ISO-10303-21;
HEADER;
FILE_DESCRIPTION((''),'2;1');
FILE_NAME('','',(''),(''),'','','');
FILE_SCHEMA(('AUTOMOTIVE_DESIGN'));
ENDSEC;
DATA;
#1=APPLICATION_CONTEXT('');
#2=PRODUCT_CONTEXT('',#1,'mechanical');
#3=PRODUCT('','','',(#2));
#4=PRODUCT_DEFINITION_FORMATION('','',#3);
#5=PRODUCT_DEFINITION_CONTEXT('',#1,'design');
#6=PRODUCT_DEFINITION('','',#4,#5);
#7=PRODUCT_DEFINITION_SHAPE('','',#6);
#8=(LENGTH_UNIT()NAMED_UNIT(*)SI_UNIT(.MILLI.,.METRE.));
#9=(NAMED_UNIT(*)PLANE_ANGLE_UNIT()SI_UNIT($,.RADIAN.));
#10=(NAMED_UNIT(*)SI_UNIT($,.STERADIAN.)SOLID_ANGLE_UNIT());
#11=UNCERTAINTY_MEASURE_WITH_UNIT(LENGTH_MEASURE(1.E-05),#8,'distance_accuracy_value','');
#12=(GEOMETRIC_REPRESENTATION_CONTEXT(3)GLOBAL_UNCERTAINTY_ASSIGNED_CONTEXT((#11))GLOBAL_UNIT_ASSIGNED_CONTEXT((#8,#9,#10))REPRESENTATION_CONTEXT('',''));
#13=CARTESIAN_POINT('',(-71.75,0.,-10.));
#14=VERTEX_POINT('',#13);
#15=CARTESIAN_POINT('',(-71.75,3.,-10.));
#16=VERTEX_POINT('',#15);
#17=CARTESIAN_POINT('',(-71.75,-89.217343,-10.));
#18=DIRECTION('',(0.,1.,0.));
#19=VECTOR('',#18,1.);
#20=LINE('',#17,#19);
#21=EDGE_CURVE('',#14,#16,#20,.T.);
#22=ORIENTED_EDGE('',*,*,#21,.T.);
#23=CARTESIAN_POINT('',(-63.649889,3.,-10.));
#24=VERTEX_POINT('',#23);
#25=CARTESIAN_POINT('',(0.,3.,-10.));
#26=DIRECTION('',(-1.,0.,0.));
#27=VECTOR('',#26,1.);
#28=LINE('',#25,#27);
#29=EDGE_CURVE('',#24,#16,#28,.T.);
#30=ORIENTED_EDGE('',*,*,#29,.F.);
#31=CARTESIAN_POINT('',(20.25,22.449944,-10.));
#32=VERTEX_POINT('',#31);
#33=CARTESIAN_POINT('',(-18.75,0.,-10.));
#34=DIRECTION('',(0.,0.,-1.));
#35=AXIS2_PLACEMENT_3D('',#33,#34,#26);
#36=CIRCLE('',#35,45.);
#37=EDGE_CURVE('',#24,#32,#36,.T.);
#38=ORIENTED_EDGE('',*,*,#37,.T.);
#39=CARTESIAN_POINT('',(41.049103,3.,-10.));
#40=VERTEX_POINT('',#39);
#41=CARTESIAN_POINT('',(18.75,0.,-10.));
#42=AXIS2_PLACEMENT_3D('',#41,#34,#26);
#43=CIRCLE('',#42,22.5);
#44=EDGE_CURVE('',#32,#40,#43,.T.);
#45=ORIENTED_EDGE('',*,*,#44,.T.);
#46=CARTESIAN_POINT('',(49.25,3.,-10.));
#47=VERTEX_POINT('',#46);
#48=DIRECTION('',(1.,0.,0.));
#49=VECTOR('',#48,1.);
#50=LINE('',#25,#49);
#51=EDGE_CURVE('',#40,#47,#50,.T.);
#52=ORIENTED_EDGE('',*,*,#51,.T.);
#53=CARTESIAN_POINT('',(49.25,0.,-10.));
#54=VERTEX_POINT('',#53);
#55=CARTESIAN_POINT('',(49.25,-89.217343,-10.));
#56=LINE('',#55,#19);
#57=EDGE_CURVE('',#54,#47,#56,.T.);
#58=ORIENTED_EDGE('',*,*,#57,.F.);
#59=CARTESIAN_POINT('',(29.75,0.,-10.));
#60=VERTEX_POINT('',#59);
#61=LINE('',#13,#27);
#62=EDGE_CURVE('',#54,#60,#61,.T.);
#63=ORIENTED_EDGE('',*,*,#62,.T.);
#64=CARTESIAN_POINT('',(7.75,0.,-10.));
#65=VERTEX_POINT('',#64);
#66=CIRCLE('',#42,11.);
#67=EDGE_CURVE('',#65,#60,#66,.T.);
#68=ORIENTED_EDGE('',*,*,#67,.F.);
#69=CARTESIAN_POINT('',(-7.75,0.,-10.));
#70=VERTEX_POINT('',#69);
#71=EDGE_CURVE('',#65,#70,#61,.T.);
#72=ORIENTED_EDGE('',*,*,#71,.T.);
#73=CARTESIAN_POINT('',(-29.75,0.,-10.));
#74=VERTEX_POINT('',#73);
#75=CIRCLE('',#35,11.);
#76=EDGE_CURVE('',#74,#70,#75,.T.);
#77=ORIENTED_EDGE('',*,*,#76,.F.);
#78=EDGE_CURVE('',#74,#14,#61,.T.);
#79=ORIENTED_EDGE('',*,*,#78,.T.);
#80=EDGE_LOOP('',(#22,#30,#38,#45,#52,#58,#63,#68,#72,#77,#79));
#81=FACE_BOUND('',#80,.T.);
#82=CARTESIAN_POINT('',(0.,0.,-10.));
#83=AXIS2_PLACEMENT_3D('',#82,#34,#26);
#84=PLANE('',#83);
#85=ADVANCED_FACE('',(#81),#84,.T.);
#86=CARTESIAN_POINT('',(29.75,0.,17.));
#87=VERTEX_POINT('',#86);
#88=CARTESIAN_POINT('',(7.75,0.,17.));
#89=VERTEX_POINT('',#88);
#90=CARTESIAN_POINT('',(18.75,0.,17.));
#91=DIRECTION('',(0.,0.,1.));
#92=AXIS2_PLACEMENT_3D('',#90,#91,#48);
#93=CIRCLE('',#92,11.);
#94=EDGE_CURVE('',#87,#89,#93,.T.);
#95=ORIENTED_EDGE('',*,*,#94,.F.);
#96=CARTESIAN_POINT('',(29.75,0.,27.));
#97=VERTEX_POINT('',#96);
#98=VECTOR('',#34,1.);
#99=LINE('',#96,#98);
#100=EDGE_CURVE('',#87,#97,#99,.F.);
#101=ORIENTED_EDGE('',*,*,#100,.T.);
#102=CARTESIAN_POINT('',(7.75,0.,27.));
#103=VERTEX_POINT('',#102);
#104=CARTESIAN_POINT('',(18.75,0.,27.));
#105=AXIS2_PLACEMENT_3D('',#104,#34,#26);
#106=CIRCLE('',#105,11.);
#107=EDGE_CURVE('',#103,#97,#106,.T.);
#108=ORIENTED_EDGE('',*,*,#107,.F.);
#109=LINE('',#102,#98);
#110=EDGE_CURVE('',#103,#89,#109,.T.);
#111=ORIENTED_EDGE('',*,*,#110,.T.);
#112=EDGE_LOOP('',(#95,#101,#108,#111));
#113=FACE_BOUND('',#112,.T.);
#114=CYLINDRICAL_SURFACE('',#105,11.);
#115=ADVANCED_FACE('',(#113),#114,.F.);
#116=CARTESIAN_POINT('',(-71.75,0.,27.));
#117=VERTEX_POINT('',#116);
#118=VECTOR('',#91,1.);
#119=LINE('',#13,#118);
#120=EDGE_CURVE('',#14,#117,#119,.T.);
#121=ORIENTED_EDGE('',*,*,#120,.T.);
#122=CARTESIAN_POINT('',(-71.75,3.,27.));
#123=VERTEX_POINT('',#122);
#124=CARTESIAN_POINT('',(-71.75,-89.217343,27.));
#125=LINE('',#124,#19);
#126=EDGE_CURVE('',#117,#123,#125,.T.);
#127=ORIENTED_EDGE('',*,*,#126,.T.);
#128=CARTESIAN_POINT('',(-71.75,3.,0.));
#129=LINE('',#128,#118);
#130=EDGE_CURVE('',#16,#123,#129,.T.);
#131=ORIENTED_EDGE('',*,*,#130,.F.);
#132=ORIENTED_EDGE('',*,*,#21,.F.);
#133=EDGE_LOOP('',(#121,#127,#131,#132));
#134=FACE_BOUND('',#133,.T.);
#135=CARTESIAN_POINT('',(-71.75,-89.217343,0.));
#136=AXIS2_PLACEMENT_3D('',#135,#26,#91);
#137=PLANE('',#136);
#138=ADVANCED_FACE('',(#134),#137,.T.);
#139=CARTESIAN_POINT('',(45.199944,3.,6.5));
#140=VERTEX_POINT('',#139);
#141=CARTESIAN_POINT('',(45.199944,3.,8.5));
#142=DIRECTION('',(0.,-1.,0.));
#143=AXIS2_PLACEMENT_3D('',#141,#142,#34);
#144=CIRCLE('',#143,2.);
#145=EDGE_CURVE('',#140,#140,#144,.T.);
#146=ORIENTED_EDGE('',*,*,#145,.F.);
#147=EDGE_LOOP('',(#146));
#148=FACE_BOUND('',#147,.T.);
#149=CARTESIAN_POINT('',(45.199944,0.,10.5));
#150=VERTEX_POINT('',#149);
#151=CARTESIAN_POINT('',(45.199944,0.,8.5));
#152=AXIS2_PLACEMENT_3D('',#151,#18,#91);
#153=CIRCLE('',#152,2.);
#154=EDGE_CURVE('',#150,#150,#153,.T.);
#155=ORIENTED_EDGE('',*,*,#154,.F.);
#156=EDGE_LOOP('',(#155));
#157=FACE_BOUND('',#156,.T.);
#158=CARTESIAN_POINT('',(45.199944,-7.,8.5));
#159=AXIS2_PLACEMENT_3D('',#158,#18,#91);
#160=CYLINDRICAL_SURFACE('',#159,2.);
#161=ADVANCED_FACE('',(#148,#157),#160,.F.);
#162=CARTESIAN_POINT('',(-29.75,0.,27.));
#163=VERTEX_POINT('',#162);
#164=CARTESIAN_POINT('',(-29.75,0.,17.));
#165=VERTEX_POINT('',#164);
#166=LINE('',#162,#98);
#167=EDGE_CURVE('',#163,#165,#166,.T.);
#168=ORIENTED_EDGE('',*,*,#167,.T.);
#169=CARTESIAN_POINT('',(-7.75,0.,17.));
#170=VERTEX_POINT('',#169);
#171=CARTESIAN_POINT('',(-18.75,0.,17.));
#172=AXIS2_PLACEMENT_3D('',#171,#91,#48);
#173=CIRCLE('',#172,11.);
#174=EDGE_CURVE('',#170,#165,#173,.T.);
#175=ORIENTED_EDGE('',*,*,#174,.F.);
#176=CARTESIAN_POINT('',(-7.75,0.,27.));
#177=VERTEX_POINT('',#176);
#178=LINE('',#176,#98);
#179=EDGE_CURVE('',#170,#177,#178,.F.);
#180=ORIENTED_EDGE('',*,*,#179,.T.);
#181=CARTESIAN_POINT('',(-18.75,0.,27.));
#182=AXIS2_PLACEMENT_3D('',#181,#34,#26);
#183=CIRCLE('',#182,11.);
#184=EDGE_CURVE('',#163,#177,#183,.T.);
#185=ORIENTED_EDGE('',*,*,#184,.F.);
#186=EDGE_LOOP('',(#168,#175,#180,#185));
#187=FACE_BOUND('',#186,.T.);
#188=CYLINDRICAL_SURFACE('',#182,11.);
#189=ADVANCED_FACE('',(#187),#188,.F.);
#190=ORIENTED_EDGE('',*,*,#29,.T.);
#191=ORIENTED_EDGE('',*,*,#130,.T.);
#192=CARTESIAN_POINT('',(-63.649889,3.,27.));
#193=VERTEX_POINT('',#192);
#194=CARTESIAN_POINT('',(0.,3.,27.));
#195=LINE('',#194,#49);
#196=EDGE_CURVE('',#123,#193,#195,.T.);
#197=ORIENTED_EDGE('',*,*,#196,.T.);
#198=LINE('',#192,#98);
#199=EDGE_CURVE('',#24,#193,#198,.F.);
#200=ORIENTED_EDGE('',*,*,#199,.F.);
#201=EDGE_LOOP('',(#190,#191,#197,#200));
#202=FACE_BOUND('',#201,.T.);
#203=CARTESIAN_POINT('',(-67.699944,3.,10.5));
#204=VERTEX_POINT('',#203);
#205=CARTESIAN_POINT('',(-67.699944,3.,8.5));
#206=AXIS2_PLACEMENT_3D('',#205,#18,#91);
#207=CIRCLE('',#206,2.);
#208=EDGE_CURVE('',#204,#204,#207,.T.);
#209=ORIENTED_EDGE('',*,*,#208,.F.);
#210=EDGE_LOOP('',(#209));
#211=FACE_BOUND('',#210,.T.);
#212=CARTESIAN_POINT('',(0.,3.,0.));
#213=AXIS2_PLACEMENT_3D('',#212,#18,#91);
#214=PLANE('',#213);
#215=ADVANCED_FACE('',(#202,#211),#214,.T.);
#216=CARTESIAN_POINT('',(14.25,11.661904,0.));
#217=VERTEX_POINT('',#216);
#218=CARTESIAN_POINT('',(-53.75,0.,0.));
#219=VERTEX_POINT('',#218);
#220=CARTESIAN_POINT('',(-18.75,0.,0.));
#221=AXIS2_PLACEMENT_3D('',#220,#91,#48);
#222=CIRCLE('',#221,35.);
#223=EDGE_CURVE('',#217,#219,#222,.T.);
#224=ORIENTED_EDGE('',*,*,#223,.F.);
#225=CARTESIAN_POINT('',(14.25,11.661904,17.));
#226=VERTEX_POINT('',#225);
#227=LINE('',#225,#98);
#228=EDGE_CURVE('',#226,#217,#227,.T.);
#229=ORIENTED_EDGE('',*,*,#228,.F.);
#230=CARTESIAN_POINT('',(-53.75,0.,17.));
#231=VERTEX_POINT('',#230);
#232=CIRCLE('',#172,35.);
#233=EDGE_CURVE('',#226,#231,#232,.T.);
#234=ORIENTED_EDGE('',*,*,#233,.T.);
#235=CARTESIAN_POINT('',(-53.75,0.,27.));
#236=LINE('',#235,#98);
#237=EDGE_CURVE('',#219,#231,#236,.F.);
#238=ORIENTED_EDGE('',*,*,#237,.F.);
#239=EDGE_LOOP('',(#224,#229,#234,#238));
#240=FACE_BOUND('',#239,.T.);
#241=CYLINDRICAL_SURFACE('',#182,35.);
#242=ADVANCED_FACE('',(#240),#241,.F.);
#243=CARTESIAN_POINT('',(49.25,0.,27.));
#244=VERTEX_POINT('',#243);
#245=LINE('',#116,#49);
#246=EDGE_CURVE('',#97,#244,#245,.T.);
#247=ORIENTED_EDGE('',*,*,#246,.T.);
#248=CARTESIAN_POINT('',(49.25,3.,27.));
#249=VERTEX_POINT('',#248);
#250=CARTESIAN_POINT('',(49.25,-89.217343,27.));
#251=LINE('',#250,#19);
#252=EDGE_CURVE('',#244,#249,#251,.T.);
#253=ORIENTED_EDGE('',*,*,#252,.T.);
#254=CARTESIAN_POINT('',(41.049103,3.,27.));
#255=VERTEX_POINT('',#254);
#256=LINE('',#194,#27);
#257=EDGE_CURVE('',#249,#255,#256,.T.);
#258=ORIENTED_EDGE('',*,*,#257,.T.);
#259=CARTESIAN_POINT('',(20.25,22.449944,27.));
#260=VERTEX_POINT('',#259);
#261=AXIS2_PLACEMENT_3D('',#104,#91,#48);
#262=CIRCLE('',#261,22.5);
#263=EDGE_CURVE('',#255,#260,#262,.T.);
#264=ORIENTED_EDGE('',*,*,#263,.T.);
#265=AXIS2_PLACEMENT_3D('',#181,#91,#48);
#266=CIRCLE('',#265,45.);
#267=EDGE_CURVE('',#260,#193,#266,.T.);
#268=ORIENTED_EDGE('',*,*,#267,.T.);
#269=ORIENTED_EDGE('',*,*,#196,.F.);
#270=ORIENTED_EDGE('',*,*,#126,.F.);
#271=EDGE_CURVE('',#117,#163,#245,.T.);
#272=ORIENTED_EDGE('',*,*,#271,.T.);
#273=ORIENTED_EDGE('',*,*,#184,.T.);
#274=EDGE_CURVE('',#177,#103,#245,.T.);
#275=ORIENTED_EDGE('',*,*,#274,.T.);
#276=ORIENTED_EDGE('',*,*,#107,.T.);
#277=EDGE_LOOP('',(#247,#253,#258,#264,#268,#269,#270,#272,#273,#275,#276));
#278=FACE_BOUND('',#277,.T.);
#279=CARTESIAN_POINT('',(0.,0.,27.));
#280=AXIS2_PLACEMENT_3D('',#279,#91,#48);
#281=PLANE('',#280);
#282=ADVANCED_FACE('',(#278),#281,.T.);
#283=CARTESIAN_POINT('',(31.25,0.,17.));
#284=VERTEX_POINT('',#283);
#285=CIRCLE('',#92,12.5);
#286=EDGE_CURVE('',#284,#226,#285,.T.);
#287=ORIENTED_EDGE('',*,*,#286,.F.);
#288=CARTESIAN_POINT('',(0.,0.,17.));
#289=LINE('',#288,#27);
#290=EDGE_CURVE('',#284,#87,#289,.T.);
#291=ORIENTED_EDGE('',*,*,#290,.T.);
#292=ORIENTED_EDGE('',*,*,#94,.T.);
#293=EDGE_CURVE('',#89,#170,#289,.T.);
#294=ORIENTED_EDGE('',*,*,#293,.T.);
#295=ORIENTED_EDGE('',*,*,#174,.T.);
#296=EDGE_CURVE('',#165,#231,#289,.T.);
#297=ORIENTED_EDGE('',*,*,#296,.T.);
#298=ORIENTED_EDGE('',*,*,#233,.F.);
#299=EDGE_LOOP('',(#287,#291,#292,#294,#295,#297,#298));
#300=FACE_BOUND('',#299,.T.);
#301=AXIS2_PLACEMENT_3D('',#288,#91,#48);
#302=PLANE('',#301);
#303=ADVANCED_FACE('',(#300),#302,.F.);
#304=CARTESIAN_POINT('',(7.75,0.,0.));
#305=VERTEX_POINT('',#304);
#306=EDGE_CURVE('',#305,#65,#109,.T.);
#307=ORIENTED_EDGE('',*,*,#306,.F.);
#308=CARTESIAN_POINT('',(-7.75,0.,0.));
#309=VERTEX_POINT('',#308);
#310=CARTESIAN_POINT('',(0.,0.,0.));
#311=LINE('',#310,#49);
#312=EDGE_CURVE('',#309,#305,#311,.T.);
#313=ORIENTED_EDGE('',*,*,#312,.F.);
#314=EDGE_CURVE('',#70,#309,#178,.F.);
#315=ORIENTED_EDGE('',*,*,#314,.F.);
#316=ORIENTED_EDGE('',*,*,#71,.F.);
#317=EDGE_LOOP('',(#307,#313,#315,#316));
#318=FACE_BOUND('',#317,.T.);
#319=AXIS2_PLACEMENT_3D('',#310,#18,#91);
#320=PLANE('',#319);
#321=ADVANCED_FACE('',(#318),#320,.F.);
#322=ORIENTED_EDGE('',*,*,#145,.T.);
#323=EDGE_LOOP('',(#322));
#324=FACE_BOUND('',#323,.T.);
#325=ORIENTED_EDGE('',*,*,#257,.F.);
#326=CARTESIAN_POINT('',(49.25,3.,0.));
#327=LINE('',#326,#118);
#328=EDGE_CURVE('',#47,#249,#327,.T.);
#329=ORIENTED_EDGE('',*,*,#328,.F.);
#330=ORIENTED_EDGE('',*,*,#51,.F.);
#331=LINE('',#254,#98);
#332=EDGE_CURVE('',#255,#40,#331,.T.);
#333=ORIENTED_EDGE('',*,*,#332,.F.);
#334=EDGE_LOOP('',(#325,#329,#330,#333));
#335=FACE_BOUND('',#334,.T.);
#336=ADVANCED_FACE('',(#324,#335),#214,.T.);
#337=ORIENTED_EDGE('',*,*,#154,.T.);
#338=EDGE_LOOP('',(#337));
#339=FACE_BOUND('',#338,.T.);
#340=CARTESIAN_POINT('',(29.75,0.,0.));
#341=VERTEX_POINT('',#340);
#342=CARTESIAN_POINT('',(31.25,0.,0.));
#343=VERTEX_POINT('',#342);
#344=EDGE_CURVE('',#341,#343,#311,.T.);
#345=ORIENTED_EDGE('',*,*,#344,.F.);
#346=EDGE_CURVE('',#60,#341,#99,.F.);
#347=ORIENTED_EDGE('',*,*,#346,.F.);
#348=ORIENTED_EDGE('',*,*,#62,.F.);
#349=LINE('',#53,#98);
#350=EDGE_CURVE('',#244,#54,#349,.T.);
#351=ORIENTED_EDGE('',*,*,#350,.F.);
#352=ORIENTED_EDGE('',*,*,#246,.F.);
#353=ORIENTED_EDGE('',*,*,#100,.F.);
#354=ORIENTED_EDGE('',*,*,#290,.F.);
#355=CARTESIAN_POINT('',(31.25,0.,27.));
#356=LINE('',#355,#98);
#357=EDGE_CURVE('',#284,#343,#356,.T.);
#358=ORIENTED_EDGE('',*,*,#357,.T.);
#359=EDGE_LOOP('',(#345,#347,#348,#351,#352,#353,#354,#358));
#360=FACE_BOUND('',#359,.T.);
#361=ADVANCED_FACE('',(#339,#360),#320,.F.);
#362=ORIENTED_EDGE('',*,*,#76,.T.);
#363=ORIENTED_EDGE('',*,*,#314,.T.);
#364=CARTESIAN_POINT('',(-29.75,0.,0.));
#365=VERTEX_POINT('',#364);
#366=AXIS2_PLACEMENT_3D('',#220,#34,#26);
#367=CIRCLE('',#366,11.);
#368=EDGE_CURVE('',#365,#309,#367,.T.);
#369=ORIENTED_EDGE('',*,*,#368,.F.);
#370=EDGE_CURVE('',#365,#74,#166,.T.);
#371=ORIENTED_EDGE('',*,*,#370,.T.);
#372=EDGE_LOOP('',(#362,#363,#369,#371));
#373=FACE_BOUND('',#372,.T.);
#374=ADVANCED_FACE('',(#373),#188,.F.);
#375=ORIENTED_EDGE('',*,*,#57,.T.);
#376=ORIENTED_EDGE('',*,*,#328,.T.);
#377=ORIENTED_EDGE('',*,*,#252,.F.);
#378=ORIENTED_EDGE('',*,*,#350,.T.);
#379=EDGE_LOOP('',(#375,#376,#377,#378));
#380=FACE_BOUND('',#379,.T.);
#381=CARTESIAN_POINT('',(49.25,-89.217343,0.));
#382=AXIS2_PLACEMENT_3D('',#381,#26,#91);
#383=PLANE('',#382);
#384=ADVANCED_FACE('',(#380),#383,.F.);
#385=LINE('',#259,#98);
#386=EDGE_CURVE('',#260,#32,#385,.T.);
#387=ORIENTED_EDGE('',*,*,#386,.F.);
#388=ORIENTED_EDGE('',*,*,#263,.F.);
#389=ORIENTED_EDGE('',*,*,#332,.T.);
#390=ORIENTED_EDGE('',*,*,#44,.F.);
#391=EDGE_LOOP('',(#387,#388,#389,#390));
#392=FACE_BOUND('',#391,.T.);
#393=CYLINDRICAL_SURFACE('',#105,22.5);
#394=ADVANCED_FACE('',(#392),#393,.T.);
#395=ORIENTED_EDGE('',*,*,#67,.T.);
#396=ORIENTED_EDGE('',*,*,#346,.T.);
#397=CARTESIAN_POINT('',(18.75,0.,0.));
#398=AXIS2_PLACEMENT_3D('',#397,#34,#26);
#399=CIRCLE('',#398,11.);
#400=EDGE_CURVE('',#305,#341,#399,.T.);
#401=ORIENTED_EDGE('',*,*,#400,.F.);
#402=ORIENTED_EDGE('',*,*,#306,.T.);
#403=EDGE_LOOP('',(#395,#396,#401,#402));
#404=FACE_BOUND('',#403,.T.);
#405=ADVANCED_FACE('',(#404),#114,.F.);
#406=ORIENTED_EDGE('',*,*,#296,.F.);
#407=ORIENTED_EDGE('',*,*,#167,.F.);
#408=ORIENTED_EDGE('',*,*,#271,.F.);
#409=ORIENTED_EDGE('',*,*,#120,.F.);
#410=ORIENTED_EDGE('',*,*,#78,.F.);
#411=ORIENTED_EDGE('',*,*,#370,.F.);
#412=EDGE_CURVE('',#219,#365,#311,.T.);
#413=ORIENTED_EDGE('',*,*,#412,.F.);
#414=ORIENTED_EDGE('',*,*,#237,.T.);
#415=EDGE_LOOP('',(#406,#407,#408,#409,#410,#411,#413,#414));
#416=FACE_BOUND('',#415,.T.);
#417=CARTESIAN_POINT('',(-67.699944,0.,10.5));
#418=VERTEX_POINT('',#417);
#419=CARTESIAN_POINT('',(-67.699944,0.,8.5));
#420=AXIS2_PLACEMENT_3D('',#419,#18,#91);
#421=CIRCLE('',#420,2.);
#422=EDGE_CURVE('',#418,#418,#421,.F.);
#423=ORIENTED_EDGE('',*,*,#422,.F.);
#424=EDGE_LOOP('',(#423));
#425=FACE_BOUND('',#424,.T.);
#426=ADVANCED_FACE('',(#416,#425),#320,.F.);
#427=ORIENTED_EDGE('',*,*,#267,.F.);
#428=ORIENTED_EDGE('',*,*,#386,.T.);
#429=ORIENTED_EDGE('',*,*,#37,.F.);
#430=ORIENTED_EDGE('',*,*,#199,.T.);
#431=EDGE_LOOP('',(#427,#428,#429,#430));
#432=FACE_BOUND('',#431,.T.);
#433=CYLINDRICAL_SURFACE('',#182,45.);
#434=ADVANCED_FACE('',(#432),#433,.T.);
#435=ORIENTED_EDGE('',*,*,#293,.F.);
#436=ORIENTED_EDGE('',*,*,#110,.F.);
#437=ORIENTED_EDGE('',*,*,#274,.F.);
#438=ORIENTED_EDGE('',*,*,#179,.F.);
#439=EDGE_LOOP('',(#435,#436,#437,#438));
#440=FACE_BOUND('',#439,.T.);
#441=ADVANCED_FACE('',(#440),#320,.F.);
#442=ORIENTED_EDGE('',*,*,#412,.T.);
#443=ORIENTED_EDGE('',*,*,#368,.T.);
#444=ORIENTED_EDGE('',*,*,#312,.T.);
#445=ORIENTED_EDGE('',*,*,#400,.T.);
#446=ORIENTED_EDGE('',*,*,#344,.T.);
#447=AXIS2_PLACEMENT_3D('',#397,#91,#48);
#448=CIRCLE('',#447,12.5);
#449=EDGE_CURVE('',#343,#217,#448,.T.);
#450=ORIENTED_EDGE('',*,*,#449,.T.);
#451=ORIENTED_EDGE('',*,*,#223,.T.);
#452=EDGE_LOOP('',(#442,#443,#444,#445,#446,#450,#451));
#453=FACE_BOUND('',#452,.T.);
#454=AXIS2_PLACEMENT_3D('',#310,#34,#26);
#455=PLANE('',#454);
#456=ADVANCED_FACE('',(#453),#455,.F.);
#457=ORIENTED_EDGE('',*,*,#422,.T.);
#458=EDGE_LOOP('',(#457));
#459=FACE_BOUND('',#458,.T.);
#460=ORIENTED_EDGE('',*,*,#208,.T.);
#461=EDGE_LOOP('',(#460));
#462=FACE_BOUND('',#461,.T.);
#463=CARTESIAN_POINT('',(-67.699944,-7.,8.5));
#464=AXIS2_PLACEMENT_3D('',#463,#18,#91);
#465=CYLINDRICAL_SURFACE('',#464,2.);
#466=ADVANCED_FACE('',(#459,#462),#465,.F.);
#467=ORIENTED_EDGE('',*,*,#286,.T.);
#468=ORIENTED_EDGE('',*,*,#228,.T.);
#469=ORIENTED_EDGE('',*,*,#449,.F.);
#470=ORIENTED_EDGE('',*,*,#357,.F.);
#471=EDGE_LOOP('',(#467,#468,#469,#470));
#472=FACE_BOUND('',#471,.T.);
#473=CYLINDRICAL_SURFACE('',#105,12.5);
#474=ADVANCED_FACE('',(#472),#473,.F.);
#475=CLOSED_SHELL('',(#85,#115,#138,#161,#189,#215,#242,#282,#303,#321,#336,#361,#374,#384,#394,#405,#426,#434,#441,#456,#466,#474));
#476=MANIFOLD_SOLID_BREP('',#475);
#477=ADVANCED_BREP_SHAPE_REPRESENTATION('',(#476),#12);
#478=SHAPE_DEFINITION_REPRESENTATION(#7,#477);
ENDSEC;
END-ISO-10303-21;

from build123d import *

# Parameters (mm, degrees)
BOSS_EXTRUDE2_DEPTH      = 27
SHELL5_DEPTH             = 17
BOSS_EXTRUDE3_START      = 10
BOSS_EXTRUDE3_DEPTH      = 10
SKETCH5_R                = 11
CUT_EXTRUDE2_DEPTH       = 87.360074687
BOSS_EXTRUDE4_DEPTH      = 37
BOSS_EXTRUDE5_DEPTH      = 3
BOSS_EXTRUDE5_DEPTH_BACK = 50
SKETCH10_R               = 2
CUT_EXTRUDE3_DEPTH       = 10
SKETCH11_W               = 121
SKETCH11_H               = 37
CUT_EXTRUDE4_DEPTH       = 92.526294036


# Read off the part's stored shape, not the designer's step: Shell5
with BuildPart() as part:
    # Sketch1 → Boss-Extrude2 (new body)
    with BuildSketch(Plane.XY):
        with BuildLine():
            ThreePointArc((20.25, 22.449944321), (-63.75, 0), (20.25, -22.449944321))
            ThreePointArc((20.25, -22.449944321), (41.25, 0), (20.25, 22.449944321))
        make_face()
    extrude(amount=BOSS_EXTRUDE2_DEPTH)

    # Shell5 outline → Shell5 (cut)
    with BuildSketch(Plane.XY):
        with BuildLine():
            ThreePointArc((14.25, -11.66190379), (31.25, 0), (14.25, 11.66190379))
            ThreePointArc((14.25, 11.66190379), (-53.75, 0), (14.25, -11.66190379))
        make_face()
    extrude(amount=SHELL5_DEPTH, mode=Mode.SUBTRACT)

    # Sketch4 → Boss-Extrude3 (add)
    with BuildSketch(Plane(origin=(0, 0, 0), x_dir=(-1, 0, 0), z_dir=(0, 0, -1)).offset(BOSS_EXTRUDE3_START)):
        with BuildLine():
            ThreePointArc((-20.25, 22.449944321), (-41.25, 0), (-20.25, -22.449944321))
            ThreePointArc((-20.25, -22.449944321), (63.75, 0), (-20.25, 22.449944321))
        make_face()
    extrude(amount=-BOSS_EXTRUDE3_DEPTH)

    # Sketch5 → Cut-Extrude2 (cut, through all)
    with BuildSketch(Plane(origin=(0, 0, -10), x_dir=(-1, 0, 0), z_dir=(0, 0, -1))):
        with Locations((-18.75, 0)):
            Circle(SKETCH5_R)
        with Locations((18.75, 0)):
            Circle(SKETCH5_R)
    extrude(amount=-CUT_EXTRUDE2_DEPTH, mode=Mode.SUBTRACT)

    # Sketch8 → Boss-Extrude4 (add)
    with BuildSketch(Plane(origin=(0, 0, -10), x_dir=(-1, 0, 0), z_dir=(0, 0, -1))):
        with BuildLine():
            Line((-41.25, 0), (-41.25, -50))
            Line((-41.25, -50), (63.75, -50))
            Line((63.75, -50), (63.75, 0))
            ThreePointArc((63.75, 0), (30.368950039, -43.474130239), (-20.25, -22.449944321))
            ThreePointArc((-20.25, -22.449944321), (-35.181676725, -15.370426149), (-41.25, 0))
        make_face()
    extrude(amount=-BOSS_EXTRUDE4_DEPTH)

    # Sketch9 → Boss-Extrude5 (add, two sides: drawn at the far end of the back side and taken through both)
    with BuildSketch(Plane(origin=(0, 0, 0), x_dir=(1, 0, 0), z_dir=(0, 1, 0)).offset(-BOSS_EXTRUDE5_DEPTH_BACK)):
        Polygon((-71.75, -27), (-58.75, -27), (-58.75, -8.5), (-58.75, 10), (-71.75, 10), align=None)
        Polygon((36.25, -8.5), (36.25, 10), (49.25, 10), (49.25, -27), (36.25, -27), align=None)
    extrude(amount=BOSS_EXTRUDE5_DEPTH + BOSS_EXTRUDE5_DEPTH_BACK)

    # Sketch10 → Cut-Extrude3 (cut)
    with BuildSketch(Plane(origin=(0, 3, 0), x_dir=(1, 0, 0), z_dir=(0, 1, 0))):
        with Locations(Location((-67.699944321, -8.5, 0), (0, 0, 270))):
            Circle(SKETCH10_R)
        with Locations(Location((45.199944321, -8.5, 0), (0, 0, 90))):
            Circle(SKETCH10_R)
    extrude(amount=-CUT_EXTRUDE3_DEPTH, mode=Mode.SUBTRACT)

    # Sketch11 → Cut-Extrude4 (cut, through all)
    with BuildSketch(Plane(origin=(0, 0, 0), x_dir=(1, 0, 0), z_dir=(0, 1, 0))):
        with Locations((-11.25, -8.5)):
            Rectangle(SKETCH11_W, SKETCH11_H)
    extrude(amount=-CUT_EXTRUDE4_DEPTH, mode=Mode.SUBTRACT)


solid = part.part
